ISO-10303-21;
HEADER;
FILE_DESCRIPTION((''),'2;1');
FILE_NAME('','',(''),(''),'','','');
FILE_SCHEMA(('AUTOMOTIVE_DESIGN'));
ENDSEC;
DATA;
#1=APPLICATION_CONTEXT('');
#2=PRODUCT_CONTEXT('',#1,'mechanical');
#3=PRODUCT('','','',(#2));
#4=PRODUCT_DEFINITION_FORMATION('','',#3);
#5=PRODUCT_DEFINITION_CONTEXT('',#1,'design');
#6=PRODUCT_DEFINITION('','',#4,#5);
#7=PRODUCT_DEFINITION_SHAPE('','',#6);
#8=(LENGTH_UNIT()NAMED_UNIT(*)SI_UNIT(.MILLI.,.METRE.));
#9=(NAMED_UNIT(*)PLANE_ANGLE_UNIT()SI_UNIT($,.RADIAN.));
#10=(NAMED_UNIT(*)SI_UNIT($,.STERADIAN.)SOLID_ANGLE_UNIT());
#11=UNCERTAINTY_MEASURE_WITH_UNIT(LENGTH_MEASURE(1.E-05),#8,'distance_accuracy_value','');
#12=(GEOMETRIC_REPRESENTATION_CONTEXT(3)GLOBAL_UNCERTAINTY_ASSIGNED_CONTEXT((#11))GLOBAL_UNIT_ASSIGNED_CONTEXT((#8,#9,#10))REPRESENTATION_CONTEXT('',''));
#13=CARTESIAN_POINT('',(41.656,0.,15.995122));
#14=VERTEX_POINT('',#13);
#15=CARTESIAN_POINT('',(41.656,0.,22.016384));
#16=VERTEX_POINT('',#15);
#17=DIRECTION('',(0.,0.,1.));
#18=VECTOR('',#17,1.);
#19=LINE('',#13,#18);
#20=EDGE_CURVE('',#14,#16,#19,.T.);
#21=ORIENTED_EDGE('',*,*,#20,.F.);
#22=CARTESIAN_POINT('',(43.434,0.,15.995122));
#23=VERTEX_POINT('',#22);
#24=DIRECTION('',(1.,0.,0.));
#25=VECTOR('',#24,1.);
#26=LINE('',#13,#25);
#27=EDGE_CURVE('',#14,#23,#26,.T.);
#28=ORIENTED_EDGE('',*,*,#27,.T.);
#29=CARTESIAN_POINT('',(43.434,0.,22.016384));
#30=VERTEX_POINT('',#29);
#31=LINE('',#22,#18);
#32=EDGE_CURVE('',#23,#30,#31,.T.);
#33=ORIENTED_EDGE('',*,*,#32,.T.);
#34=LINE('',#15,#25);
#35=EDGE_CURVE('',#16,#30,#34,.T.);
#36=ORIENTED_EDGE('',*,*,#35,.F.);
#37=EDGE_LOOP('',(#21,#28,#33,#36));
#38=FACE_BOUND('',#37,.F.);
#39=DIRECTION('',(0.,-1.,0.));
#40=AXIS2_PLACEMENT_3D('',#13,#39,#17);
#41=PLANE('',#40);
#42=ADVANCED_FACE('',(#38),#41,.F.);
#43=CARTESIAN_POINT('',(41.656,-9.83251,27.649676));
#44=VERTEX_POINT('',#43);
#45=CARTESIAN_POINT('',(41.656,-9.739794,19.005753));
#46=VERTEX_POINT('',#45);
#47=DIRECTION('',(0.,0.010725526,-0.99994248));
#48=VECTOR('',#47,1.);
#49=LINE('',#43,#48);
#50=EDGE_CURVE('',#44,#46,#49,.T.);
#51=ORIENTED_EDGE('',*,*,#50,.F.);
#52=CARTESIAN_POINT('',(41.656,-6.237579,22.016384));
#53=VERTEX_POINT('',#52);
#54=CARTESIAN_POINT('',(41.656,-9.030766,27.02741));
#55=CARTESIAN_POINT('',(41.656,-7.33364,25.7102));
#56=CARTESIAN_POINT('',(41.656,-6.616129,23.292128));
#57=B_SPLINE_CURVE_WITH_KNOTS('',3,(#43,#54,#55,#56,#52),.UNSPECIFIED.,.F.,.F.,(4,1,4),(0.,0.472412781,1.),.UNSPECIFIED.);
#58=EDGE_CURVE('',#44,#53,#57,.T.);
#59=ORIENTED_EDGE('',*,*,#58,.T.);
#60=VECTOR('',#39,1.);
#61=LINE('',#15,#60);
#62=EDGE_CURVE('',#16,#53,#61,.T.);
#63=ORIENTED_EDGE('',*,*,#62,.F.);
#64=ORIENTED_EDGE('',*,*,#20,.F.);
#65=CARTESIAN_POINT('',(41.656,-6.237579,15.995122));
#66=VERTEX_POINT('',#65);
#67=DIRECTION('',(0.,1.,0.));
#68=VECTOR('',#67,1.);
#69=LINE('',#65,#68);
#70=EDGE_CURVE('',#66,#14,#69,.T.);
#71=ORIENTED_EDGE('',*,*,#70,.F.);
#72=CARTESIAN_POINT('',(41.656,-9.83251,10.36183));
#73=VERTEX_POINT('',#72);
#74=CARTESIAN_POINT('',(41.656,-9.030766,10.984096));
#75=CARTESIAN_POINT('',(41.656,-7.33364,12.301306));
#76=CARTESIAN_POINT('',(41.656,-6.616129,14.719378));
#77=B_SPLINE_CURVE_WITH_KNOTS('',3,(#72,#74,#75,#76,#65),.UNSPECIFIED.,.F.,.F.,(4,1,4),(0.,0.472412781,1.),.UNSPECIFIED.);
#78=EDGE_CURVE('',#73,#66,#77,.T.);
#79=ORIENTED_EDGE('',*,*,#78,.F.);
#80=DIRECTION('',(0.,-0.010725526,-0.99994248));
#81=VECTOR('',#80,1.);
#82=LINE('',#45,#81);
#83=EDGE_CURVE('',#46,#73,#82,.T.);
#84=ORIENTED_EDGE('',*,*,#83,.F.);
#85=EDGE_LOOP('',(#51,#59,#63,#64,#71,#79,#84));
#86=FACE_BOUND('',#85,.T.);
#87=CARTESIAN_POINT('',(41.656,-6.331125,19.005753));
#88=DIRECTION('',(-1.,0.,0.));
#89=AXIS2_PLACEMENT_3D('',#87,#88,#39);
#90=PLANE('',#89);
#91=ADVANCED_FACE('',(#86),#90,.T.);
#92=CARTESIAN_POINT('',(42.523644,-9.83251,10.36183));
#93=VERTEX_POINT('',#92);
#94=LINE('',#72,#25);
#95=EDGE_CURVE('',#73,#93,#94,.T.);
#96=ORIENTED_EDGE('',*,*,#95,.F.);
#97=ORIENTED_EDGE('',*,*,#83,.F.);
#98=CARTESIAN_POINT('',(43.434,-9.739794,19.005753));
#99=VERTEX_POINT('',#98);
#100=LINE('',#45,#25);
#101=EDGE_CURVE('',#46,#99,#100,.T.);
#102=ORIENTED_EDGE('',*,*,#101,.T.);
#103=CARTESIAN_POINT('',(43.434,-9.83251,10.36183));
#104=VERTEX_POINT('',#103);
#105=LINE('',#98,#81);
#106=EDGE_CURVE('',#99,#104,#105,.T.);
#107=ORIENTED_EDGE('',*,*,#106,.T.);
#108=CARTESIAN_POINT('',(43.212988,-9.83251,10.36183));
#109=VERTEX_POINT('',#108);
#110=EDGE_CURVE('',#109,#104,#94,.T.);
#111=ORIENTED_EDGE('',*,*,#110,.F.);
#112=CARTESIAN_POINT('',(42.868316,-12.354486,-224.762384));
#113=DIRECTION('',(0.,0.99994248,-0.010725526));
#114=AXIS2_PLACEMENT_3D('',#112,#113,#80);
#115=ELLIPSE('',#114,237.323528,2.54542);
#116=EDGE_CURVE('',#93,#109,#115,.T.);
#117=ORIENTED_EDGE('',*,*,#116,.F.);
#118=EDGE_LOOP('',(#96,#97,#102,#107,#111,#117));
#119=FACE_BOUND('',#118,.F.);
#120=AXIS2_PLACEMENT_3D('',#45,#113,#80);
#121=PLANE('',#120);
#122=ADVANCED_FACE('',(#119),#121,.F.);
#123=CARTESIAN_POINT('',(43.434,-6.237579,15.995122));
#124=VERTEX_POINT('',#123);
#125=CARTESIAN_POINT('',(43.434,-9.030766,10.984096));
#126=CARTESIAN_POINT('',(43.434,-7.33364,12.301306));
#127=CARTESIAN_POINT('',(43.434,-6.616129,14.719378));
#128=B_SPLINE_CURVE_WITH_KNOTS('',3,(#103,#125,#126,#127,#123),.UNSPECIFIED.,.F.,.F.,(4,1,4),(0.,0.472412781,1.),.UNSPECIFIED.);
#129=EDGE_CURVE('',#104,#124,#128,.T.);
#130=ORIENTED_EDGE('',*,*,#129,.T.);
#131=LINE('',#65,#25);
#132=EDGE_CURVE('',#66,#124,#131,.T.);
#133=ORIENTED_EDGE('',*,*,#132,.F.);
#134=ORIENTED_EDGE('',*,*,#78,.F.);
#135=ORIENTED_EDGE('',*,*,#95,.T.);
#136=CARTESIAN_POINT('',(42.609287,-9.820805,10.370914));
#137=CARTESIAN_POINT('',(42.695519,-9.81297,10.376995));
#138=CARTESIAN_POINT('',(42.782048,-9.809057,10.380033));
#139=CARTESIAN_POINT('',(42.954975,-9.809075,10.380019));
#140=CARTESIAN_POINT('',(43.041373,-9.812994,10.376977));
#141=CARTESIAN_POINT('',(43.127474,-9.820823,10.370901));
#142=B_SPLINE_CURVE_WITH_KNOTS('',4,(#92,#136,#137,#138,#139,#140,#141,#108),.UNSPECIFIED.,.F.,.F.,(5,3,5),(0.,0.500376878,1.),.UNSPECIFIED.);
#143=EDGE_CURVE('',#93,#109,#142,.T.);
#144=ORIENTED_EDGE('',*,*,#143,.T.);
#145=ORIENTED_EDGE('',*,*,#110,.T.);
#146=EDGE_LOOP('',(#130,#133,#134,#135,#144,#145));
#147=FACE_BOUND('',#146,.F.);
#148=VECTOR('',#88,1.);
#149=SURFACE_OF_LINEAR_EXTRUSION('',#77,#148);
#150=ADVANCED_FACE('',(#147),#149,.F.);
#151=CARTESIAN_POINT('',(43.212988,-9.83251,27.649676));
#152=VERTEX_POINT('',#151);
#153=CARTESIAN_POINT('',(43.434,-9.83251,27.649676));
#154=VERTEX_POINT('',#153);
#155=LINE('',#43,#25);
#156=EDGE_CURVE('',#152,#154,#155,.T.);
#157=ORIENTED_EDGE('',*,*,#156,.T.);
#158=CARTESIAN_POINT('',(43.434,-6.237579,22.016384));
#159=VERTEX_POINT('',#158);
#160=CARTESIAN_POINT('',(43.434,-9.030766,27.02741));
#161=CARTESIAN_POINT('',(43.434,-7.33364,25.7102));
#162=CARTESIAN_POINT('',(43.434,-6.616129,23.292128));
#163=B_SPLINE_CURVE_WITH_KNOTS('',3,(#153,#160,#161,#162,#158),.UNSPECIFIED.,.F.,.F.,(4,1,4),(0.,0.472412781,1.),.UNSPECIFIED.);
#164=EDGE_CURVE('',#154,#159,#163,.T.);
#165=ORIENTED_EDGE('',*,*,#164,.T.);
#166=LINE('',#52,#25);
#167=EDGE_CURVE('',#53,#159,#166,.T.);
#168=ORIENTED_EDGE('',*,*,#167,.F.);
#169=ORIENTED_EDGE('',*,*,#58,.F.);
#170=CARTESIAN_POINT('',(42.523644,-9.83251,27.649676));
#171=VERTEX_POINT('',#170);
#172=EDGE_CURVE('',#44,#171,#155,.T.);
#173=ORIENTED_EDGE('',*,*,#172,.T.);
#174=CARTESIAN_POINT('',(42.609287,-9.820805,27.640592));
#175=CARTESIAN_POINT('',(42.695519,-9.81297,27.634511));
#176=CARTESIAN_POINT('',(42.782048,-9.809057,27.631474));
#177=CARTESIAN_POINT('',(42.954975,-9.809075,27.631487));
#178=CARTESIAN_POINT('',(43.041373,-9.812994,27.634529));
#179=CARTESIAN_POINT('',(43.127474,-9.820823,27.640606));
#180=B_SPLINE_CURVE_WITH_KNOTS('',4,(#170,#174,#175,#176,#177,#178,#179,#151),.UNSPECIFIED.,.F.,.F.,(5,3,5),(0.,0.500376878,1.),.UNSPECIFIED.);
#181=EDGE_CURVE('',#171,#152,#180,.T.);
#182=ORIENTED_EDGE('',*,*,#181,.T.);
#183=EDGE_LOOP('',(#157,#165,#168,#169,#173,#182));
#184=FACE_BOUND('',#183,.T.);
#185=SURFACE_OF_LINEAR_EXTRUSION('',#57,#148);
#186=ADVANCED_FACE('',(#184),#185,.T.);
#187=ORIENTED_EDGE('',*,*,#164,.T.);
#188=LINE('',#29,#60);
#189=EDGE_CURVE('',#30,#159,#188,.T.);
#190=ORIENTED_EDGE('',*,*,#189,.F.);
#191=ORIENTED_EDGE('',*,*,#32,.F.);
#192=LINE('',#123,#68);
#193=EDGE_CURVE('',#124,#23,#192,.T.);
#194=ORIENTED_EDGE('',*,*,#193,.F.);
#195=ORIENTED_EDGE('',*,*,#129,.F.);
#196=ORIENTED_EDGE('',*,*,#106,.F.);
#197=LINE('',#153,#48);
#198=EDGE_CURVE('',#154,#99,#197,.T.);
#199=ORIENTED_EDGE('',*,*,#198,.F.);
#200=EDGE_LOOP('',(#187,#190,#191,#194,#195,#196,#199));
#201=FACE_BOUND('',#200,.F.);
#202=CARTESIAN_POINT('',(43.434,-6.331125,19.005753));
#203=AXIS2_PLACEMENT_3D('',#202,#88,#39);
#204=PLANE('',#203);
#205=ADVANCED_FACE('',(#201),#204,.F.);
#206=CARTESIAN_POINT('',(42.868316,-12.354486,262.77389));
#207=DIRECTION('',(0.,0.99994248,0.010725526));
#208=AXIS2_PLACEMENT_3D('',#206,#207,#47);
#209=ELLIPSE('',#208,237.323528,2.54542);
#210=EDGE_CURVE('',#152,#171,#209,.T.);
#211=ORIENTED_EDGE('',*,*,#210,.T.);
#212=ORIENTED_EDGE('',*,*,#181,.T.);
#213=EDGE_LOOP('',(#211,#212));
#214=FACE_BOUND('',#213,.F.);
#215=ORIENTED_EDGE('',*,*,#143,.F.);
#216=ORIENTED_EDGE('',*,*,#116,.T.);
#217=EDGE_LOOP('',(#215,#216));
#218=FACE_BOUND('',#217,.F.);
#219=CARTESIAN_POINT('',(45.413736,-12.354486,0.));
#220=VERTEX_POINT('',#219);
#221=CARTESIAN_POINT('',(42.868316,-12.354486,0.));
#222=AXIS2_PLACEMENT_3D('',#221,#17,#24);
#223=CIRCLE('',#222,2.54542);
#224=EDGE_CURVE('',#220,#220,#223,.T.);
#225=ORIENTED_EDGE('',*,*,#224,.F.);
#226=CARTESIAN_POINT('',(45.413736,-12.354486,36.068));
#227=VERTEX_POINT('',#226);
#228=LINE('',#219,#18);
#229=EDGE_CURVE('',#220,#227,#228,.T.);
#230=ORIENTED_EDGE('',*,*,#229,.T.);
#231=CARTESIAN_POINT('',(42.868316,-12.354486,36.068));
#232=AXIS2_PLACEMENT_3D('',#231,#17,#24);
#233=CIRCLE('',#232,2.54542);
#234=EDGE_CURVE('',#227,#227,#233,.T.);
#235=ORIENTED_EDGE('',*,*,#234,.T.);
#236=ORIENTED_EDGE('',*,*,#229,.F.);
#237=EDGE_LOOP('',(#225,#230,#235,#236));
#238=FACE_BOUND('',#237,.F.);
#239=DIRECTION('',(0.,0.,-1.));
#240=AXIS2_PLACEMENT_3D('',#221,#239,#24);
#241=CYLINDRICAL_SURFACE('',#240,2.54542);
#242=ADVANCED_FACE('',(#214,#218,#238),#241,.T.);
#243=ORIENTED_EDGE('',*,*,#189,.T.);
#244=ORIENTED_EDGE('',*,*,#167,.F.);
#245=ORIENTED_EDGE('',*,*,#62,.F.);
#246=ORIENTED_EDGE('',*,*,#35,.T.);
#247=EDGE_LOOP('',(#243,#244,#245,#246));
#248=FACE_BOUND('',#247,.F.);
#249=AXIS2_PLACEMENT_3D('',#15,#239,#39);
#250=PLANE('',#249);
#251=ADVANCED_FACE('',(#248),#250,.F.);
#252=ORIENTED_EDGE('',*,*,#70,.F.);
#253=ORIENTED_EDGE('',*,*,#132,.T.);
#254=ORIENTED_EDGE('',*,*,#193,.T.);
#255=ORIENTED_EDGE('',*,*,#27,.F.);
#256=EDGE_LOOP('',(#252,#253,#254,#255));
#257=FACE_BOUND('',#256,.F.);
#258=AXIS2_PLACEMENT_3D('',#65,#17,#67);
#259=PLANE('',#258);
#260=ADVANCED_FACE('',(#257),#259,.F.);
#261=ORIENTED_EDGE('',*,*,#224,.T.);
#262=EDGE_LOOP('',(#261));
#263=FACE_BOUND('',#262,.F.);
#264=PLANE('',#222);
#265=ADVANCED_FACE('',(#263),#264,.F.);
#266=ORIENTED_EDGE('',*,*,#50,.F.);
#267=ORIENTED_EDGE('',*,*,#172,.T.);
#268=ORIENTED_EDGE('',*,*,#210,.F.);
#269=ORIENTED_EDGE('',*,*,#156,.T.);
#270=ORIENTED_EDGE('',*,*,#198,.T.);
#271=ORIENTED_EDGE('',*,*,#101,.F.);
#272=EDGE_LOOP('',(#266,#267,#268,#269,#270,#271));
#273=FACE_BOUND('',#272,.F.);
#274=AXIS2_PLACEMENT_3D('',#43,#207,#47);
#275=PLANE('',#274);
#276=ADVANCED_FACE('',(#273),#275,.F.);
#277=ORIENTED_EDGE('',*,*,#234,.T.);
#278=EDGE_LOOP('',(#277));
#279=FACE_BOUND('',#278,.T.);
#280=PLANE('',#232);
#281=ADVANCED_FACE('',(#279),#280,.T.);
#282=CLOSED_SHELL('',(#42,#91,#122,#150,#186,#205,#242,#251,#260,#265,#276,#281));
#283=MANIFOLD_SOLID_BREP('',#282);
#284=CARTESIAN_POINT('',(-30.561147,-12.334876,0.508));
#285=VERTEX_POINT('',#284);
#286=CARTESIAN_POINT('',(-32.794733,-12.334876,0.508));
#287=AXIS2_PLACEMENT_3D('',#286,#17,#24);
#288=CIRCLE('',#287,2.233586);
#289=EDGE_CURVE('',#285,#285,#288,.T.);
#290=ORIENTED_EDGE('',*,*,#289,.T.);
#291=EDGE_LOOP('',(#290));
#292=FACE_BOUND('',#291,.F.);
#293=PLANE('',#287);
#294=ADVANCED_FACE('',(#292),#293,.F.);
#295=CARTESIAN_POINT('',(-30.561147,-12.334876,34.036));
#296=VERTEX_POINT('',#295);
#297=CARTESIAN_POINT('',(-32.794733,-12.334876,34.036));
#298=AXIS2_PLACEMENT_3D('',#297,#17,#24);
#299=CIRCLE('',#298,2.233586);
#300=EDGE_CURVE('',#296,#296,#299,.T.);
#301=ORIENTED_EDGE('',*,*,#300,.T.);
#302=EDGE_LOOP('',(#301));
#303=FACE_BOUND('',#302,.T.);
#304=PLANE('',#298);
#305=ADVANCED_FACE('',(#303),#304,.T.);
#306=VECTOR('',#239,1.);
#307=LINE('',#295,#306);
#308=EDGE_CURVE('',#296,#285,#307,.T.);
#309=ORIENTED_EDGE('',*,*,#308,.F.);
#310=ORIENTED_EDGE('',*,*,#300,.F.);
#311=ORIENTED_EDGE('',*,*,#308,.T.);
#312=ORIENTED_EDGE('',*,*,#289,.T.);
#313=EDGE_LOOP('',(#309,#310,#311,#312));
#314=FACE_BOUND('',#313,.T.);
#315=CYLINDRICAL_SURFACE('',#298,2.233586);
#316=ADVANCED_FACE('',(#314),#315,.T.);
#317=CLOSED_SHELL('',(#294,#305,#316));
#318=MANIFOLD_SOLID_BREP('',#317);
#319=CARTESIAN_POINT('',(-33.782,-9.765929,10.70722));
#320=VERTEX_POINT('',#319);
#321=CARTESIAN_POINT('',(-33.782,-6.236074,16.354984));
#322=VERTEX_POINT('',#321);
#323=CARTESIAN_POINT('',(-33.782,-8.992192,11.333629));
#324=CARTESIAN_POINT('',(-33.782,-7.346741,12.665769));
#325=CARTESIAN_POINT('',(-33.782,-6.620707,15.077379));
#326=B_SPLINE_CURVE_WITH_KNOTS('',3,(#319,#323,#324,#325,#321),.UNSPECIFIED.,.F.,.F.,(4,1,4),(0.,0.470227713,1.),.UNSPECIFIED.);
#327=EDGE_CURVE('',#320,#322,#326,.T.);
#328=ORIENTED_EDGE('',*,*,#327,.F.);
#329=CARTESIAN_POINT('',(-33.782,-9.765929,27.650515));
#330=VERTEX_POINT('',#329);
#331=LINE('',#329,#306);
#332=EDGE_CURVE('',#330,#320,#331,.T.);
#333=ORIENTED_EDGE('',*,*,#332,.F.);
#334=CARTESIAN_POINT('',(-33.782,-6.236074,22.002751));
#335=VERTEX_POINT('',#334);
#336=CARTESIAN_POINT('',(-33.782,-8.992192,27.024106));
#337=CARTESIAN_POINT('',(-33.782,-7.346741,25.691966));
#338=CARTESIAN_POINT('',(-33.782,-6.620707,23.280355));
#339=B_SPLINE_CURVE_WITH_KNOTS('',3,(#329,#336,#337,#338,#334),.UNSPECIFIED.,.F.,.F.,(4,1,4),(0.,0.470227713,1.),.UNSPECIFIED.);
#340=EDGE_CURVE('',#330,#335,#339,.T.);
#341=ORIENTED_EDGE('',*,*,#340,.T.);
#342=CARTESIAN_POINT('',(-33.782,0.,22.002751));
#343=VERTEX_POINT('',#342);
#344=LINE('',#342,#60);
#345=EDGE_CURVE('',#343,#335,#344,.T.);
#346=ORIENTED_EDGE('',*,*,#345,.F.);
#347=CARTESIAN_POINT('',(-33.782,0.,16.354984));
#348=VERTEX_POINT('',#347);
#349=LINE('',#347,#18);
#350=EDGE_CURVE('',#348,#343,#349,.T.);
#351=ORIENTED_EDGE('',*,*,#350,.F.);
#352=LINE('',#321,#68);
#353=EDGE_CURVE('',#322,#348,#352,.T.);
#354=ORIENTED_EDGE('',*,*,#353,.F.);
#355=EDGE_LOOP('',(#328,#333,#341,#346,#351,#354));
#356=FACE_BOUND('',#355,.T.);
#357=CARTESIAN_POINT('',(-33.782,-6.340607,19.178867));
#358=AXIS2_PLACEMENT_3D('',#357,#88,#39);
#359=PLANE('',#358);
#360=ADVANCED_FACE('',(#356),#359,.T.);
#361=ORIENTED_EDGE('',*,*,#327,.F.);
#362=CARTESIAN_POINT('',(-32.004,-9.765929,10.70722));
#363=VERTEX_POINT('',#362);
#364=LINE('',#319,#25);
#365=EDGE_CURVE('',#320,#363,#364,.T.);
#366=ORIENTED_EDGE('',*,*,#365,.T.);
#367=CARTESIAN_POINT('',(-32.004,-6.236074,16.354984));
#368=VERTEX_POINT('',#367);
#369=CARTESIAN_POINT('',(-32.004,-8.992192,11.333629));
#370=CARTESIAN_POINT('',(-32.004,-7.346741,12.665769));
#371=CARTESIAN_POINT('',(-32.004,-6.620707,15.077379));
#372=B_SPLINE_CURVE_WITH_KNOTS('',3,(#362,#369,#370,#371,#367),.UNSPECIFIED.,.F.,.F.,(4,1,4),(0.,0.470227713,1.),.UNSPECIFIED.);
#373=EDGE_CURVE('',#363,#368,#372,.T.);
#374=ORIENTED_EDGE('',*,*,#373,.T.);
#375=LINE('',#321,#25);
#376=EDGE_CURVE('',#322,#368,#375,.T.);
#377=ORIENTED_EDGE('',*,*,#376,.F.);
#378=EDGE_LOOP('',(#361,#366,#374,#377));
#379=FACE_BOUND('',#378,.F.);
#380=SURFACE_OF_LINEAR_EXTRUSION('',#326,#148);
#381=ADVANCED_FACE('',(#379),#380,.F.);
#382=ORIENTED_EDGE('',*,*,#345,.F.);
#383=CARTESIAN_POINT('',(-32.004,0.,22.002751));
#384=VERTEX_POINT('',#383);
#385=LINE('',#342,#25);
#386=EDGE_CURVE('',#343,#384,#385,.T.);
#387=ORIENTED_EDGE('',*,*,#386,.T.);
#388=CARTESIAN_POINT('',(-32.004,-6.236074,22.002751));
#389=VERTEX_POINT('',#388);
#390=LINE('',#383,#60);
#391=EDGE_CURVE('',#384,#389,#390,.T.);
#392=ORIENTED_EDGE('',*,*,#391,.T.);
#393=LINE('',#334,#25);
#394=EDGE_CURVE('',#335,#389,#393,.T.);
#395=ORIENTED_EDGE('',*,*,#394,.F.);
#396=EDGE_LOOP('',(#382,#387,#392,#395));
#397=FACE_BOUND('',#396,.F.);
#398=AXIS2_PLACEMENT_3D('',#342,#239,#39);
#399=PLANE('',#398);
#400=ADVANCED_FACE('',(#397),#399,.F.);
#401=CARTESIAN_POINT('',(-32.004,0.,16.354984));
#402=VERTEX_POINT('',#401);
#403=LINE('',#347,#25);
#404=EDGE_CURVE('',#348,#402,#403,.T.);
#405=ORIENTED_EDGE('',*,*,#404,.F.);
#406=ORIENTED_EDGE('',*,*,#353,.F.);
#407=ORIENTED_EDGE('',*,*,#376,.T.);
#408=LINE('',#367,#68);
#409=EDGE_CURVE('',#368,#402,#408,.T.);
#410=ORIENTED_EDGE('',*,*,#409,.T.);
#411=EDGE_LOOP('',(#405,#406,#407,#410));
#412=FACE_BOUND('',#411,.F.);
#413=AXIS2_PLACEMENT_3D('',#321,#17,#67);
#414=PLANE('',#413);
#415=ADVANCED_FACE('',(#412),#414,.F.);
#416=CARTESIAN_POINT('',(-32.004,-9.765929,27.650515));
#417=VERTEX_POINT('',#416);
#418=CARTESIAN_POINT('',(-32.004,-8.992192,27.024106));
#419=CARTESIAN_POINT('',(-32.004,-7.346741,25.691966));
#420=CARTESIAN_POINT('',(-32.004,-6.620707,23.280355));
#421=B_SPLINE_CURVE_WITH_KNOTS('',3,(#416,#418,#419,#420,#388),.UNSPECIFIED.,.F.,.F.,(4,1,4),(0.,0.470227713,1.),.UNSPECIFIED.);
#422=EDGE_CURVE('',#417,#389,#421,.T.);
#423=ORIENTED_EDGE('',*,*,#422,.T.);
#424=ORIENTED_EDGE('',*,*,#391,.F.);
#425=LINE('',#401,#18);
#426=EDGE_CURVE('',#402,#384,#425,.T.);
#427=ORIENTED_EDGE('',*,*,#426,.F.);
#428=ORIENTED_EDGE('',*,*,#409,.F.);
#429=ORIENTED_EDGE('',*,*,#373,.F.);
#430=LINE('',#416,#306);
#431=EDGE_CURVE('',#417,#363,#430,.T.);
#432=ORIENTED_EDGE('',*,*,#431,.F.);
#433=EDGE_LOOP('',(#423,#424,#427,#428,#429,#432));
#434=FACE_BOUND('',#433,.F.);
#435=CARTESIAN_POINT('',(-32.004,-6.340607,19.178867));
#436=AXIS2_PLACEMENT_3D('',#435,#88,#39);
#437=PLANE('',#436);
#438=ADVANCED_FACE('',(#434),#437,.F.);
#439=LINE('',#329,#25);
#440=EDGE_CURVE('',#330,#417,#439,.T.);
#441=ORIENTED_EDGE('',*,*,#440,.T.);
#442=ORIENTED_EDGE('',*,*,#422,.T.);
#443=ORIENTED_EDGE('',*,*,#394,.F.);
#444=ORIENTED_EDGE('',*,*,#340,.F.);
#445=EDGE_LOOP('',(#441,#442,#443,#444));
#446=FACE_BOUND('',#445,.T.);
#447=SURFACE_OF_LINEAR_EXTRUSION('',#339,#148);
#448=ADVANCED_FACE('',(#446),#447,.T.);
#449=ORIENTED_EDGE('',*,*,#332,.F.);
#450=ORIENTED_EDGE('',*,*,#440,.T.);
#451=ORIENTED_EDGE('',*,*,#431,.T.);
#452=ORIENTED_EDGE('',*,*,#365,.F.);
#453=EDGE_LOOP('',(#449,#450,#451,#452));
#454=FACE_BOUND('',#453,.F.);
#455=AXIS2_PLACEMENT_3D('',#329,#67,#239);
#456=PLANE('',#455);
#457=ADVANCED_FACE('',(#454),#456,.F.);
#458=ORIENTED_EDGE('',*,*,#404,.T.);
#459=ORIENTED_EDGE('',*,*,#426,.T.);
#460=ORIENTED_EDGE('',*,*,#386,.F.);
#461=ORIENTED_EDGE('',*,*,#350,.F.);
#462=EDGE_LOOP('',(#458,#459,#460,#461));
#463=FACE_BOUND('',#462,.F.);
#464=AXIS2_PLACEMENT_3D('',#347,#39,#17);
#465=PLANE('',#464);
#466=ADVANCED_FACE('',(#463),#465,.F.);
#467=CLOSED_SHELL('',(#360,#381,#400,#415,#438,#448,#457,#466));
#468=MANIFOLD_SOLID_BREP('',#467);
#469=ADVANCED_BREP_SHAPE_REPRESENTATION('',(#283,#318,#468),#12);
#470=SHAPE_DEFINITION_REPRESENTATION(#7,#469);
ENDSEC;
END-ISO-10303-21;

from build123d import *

# Parameters (mm, degrees)
F15_R     = 2.2335856761
F16_DEPTH = 33.528
F17_R     = 2.5454196351
F18_DEPTH = 36.068
F21_DEPTH = 1.778
F24_DEPTH = 1.778


# Not quite as in the source:
# - the program builds the solid bodies; features that only make, move or delete a surface that nothing else refers to are left out


with BuildPart() as f16:
    # F15 (on offset) → F16 (new body)
    with BuildSketch(Plane.XY.offset(34.036)):
        with Locations((-32.7947326005, -12.3348757625)):
            Circle(F15_R)
    extrude(amount=-F16_DEPTH)


with BuildPart() as f18:
    # F17 (on Top) → F18 (new body)
    with BuildSketch(Plane.XY):
        with Locations((42.8683161736, -12.3544856906)):
            Circle(F17_R)
    extrude(amount=F18_DEPTH)

    # F23 (on offset) → F24 (join)
    with BuildSketch(Plane.YZ.offset(41.656)):
        with BuildLine():
            add(Edge.make_bspline(
                [(-9.8325097933, 27.6496764272), (-9.0307658036, 27.0274098331), (-7.333639855, 25.7102003531), (-6.6161287383, 23.2921278525), (-6.237579044, 22.0163837075)],
                knots=[0, 0, 0, 0, 0.4724127814, 1, 1, 1, 1], degree=3))
            Line((-9.8325097933, 27.6496764272), (-9.7397938371, 19.0057530999))
            Line((-9.7397938371, 19.0057530999), (-9.8325097933, 10.3618297726))
            add(Edge.make_bspline(
                [(-9.8325097933, 10.3618297726), (-9.0307658036, 10.9840963667), (-7.333639855, 12.3013058467), (-6.6161287383, 14.7193783474), (-6.237579044, 15.9951224923)],
                knots=[0, 0, 0, 0, 0.4724127814, 1, 1, 1, 1], degree=3))
            Line((-6.237579044, 15.9951224923), (0, 15.9951224923))
            Line((0, 15.9951224923), (0, 19.0057530999))
            Line((0, 19.0057530999), (0, 22.0163837075))
            Line((0, 22.0163837075), (-6.237579044, 22.0163837075))
        make_face()
    extrude(amount=F24_DEPTH)


with BuildPart() as f21:
    # F20 (on offset) → F21 (new body)
    with BuildSketch(Plane.YZ.offset(-33.782)):
        with BuildLine():
            add(Edge.make_bspline(
                [(-9.7659286112, 27.6505146176), (-8.9921918233, 27.024105619), (-7.3467405515, 25.6919659306), (-6.6207069657, 23.2803554227), (-6.2360744923, 22.0027510077)],
                knots=[0, 0, 0, 0, 0.4702277126, 1, 1, 1, 1], degree=3))
            Line((-9.7659286112, 27.6505146176), (-9.7659286112, 10.7072200626))
            add(Edge.make_bspline(
                [(-9.7659286112, 10.7072200626), (-8.9921918233, 11.3336290612), (-7.3467405515, 12.6657687496), (-6.6207069657, 15.0773792575), (-6.2360744923, 16.3549836725)],
                knots=[0, 0, 0, 0, 0.4702277126, 1, 1, 1, 1], degree=3))
            Line((-6.2360744923, 16.3549836725), (0, 16.3549836725))
            Line((0, 16.3549836725), (0, 19.1788673401))
            Line((0, 19.1788673401), (0, 22.0027510077))
            Line((0, 22.0027510077), (-6.2360744923, 22.0027510077))
        make_face()
    extrude(amount=F21_DEPTH)


solid = Compound([f16.part, f18.part, f21.part])
